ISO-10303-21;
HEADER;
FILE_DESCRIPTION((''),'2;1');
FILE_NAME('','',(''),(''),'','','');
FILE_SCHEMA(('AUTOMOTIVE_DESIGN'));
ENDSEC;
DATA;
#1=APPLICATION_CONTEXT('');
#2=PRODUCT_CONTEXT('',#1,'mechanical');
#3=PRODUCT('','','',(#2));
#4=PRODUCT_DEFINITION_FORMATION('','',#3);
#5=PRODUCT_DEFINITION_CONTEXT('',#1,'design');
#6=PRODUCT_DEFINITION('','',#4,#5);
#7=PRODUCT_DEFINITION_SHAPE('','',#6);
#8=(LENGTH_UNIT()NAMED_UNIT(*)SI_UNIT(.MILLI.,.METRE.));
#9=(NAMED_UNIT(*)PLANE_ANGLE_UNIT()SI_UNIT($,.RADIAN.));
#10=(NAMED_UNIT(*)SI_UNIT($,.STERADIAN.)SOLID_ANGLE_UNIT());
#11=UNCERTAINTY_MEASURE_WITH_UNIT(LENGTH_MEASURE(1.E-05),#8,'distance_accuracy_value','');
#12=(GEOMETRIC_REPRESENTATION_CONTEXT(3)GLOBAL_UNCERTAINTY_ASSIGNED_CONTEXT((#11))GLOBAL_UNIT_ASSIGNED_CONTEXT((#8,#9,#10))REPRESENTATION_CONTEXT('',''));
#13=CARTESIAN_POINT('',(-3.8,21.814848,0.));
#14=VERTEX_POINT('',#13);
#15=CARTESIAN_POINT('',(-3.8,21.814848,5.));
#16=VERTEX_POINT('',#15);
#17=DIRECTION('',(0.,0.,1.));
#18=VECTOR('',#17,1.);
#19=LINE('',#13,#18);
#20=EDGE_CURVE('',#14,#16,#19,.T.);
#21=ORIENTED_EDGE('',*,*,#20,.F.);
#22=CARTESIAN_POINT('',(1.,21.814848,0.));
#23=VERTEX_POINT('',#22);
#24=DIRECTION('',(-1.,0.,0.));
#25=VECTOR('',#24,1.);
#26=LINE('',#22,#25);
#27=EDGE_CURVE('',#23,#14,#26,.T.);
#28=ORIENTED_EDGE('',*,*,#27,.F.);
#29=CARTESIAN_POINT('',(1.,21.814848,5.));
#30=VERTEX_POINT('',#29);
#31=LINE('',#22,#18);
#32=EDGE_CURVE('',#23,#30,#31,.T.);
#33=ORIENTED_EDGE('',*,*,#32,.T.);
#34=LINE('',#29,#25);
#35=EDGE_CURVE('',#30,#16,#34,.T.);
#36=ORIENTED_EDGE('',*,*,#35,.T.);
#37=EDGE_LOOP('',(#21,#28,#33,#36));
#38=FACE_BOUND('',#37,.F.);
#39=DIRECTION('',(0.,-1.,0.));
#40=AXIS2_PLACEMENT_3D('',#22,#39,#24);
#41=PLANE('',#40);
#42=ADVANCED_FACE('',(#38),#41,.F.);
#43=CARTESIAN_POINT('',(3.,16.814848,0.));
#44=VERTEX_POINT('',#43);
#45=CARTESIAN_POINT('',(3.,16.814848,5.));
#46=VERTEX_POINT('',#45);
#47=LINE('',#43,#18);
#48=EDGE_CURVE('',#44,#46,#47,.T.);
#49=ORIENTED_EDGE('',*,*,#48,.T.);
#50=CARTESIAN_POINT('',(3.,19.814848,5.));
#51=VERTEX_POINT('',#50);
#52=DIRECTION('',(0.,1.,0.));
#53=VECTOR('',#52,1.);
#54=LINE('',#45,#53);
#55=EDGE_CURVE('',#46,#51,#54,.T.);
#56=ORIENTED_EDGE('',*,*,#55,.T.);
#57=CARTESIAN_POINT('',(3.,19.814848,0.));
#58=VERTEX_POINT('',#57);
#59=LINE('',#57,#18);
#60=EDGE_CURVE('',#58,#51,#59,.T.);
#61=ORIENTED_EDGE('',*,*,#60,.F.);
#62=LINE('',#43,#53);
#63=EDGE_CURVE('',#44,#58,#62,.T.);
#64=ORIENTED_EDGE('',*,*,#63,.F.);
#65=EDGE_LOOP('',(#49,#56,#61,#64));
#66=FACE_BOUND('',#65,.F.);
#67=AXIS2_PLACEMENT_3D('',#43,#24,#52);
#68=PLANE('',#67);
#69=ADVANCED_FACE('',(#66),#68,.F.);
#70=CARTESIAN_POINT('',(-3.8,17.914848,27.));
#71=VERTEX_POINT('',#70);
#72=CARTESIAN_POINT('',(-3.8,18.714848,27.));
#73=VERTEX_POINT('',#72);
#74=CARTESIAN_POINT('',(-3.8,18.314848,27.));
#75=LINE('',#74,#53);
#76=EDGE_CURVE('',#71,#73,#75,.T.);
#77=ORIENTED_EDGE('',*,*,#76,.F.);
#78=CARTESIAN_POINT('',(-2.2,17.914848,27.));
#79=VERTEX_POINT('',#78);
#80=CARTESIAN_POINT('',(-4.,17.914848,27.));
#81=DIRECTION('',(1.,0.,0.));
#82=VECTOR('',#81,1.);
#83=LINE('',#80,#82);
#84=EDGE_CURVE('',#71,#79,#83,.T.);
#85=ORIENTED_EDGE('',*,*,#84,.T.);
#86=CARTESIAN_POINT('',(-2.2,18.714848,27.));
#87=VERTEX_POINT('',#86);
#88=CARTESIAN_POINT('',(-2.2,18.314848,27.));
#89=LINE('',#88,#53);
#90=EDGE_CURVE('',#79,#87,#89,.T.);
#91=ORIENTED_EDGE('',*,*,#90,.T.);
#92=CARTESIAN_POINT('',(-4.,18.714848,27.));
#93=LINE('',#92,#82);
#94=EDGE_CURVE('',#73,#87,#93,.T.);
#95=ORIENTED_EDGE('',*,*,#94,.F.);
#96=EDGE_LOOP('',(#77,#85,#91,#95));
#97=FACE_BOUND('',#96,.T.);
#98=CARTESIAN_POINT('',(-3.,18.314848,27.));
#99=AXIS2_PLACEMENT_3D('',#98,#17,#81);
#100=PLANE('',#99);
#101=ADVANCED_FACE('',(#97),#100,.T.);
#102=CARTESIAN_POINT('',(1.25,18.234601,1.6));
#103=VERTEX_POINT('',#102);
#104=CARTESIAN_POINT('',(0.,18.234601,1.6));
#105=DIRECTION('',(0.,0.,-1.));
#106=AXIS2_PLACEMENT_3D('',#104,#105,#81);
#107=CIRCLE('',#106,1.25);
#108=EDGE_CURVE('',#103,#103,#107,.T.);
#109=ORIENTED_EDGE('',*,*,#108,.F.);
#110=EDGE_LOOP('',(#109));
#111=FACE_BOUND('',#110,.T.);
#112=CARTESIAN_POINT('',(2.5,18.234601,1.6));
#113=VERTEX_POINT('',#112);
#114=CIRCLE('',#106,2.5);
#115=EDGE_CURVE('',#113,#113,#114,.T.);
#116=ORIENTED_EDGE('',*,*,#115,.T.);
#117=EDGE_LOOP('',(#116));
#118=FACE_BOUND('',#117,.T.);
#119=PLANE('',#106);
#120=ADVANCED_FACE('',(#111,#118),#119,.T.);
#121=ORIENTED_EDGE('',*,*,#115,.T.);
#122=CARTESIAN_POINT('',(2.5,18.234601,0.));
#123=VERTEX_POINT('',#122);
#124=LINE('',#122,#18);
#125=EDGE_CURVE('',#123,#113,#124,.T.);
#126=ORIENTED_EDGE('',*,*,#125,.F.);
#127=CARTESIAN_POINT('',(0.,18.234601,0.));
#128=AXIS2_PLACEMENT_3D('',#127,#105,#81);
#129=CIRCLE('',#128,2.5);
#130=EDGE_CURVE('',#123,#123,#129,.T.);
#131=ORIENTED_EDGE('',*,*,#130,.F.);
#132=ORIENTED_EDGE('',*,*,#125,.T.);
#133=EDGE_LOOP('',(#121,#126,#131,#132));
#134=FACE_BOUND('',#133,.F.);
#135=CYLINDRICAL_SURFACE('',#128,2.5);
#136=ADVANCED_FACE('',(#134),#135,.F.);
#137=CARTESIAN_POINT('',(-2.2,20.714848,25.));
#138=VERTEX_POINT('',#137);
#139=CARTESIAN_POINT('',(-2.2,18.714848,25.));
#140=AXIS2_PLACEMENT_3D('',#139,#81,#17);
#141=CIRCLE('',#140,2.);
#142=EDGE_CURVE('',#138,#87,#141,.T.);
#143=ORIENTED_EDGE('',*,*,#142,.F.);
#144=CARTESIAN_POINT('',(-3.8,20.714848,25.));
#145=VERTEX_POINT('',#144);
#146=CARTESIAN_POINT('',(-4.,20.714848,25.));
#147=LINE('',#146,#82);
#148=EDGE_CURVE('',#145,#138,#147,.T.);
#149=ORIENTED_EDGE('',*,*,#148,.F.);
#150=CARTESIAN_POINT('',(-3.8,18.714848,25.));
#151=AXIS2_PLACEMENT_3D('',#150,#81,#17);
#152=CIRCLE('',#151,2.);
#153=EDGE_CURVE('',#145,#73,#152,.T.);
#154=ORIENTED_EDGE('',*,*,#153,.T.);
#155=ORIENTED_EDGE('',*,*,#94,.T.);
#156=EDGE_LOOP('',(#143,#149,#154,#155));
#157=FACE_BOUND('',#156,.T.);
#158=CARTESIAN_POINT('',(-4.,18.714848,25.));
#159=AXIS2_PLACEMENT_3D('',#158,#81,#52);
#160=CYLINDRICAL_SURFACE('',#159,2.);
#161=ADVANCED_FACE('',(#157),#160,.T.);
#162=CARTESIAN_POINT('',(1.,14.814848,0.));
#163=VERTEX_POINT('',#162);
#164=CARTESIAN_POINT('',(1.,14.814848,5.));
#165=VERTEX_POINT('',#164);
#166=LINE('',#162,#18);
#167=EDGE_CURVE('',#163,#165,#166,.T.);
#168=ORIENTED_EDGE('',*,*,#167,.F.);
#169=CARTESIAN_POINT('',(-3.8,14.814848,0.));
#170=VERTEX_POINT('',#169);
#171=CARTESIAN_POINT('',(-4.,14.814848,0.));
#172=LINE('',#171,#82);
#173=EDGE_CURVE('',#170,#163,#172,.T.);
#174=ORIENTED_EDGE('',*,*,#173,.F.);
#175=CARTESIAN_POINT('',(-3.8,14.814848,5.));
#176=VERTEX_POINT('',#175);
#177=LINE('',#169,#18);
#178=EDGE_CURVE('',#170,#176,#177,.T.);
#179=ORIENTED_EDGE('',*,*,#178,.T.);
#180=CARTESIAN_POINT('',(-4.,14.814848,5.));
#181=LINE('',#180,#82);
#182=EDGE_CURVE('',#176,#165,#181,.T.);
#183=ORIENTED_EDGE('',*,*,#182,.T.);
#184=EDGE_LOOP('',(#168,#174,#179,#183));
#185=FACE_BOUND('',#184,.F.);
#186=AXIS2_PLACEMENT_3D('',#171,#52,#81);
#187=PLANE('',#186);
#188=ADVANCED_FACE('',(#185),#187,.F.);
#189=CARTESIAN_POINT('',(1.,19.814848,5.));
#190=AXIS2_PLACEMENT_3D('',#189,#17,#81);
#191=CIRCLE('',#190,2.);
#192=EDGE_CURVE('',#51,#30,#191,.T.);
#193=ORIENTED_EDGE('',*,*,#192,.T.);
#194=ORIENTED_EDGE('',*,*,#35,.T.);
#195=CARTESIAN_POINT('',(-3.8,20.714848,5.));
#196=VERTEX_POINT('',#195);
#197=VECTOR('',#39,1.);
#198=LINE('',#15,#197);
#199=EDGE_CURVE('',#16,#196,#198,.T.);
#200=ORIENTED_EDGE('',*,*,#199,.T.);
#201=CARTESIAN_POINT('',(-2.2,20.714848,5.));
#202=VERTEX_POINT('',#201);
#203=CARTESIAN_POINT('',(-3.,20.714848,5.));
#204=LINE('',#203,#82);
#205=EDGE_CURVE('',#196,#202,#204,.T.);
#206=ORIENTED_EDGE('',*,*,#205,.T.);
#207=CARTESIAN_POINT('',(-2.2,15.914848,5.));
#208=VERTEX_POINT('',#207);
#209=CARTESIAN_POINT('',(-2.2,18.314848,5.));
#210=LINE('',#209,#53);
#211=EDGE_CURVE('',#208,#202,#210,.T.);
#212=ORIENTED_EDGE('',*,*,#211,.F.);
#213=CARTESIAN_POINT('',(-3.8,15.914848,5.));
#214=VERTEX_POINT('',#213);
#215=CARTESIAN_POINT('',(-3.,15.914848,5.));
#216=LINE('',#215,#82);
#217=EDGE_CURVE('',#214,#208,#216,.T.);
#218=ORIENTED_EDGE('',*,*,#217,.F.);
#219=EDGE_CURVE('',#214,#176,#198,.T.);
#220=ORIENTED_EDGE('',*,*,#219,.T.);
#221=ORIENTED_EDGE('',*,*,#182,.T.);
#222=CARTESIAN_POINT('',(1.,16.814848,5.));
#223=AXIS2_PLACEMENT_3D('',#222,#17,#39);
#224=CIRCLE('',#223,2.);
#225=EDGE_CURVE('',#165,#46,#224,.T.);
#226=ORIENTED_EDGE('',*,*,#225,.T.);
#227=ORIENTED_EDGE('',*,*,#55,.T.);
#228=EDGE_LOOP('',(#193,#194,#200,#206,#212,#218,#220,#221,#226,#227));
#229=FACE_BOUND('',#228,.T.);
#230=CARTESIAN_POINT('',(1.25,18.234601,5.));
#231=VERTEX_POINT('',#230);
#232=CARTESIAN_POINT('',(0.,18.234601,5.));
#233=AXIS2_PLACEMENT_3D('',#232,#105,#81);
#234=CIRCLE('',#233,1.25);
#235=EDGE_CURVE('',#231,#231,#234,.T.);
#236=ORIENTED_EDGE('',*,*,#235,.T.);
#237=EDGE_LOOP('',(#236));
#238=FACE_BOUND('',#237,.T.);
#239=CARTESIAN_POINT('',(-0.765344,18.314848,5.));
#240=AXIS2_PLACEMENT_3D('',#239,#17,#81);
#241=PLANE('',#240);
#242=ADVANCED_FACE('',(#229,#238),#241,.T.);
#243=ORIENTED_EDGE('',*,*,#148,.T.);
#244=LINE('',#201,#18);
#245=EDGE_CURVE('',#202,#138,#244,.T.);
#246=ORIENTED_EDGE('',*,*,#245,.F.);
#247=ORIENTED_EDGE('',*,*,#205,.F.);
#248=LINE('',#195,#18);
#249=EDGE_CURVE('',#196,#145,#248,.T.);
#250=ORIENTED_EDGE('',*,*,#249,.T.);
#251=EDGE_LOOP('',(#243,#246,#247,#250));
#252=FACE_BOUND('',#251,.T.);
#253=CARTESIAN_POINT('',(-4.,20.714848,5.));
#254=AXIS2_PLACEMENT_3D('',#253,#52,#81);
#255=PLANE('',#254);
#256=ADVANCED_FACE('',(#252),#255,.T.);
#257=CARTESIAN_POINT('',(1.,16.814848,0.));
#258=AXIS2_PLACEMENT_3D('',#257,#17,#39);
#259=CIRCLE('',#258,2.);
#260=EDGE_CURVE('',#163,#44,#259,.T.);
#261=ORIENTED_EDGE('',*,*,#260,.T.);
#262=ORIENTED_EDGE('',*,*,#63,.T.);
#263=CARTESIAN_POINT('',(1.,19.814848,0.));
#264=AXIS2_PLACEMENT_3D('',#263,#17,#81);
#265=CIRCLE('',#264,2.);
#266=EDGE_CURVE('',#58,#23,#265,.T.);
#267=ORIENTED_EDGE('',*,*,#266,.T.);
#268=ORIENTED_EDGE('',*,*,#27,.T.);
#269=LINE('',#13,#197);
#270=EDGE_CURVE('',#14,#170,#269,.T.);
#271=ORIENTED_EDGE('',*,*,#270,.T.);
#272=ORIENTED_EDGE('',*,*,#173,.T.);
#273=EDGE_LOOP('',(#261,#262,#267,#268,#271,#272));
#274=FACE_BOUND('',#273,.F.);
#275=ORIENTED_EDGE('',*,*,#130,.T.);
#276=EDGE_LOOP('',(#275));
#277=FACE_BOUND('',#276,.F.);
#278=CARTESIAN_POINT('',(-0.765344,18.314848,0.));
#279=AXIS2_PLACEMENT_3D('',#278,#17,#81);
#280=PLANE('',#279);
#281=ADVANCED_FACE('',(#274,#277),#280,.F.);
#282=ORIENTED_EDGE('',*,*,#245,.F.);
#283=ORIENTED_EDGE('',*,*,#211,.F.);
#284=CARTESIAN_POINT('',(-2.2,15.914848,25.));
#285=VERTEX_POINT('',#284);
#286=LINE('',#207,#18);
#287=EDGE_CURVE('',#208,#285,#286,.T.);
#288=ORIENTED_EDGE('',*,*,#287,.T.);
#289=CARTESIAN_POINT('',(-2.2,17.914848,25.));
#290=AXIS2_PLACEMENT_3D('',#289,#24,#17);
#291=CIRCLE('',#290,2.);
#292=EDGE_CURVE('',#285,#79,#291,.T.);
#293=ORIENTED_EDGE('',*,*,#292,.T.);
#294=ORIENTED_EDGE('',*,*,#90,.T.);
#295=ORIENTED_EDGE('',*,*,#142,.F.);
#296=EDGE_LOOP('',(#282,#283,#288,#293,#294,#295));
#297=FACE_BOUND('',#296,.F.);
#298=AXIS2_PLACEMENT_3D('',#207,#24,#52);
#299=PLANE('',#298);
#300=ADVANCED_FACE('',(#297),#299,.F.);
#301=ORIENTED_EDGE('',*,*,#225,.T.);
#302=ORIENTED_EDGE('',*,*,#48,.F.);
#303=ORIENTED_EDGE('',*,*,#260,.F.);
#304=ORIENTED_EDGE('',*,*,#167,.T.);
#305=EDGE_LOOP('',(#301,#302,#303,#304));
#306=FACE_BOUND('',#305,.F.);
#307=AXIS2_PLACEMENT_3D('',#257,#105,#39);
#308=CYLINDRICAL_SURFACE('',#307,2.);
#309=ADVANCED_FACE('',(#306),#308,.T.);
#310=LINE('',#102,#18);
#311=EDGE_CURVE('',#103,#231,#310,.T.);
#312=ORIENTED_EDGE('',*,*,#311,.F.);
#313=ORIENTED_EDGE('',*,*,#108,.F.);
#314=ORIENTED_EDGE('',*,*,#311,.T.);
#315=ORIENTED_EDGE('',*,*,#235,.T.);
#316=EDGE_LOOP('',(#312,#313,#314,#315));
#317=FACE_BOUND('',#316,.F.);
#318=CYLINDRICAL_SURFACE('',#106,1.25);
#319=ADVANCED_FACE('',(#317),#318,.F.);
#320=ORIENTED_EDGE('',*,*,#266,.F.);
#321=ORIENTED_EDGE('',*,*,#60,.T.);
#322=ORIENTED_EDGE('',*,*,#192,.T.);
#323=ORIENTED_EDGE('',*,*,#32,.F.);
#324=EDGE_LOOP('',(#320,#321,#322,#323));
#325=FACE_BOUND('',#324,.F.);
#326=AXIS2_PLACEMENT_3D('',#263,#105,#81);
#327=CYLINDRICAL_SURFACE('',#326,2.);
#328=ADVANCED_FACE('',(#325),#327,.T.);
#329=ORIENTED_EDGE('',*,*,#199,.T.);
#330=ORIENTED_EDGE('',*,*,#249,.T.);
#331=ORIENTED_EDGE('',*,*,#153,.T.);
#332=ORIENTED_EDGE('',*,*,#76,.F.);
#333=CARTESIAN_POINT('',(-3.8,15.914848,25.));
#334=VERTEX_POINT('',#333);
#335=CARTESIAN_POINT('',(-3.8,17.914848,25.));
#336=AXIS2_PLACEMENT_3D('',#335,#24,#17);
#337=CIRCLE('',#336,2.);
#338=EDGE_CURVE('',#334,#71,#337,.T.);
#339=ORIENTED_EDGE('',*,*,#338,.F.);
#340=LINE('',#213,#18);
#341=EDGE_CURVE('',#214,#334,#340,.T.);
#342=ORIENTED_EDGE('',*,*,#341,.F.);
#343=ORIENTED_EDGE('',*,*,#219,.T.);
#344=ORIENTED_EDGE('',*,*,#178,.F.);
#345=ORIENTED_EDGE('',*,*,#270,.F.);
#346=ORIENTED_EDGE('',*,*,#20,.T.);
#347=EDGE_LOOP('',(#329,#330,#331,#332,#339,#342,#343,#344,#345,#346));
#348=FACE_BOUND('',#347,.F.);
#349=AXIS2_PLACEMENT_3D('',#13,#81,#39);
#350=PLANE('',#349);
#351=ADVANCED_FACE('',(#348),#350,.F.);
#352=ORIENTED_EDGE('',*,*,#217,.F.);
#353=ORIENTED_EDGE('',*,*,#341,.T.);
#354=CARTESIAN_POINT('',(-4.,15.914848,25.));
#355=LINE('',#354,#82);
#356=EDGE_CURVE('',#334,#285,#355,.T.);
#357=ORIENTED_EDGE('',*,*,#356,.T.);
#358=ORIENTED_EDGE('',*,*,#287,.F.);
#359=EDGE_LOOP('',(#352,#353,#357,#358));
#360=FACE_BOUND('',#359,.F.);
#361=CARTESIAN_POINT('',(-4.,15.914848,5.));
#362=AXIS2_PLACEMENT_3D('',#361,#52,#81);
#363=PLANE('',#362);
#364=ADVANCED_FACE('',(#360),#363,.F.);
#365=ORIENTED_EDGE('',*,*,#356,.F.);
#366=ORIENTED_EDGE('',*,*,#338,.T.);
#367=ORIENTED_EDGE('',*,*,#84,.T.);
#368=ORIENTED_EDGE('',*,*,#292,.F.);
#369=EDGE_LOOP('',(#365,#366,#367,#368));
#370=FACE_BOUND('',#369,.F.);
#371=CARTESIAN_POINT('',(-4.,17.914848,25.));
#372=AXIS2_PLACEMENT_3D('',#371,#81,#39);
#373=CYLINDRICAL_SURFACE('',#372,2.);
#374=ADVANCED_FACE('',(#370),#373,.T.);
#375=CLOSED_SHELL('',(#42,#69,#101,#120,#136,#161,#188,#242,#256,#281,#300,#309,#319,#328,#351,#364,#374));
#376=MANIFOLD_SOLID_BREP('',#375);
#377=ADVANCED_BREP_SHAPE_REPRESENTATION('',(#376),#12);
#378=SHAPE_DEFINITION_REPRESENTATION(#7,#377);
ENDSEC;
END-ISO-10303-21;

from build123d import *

# Parameters (mm, degrees)
F1_DEPTH  = 5
F2_R      = 2.5
F3_DEPTH  = 1.6
F4_R      = 1.25
F5_DEPTH  = 3.4
F6_W      = 2
F6_H      = 4.8
F7_DEPTH  = 22
F8_R      = 2
F9_DEPTH  = 0.2
F10_DEPTH = 0.2


# Not quite as in the source:
# - a feature names something its author has since deleted; it is built from what else it names


with BuildPart() as f1:
    # F0 (on Top) → F1 (new body)
    with BuildSketch(Plane.XY):
        with BuildLine():
            Line((1, 21.8148477226), (-4, 21.8148477226))
            Line((-4, 21.8148477226), (-4, 14.8148477226))
            Line((-4, 14.8148477226), (1, 14.8148477226))
            ThreePointArc((1, 14.8148477226), (2.4142135624, 15.4006341603), (3, 16.8148477226))
            Line((3, 16.8148477226), (3, 19.8148477226))
            ThreePointArc((3, 19.8148477226), (2.4142135624, 21.229061285), (1, 21.8148477226))
        make_face()
    extrude(amount=F1_DEPTH)

    # F2 (on face) → F3 (cut)
    with BuildSketch(Plane(origin=(0, 0, 0), x_dir=(1, 0, 0), z_dir=(0, 0, -1))):
        with Locations((0, -18.2346012443)):
            Circle(F2_R)
    extrude(amount=-F3_DEPTH, mode=Mode.SUBTRACT)

    # F4 (on face) → F5 (cut)
    with BuildSketch(Plane(origin=(0, 0, 1.6), x_dir=(1, 0, 0), z_dir=(0, 0, -1))):
        with Locations((0, -18.2346012443)):
            Circle(F4_R)
    extrude(amount=-F5_DEPTH, mode=Mode.SUBTRACT)

    # F6 (on face) → F7 (join)
    with BuildSketch(Plane.XY.offset(5)):
        with Locations((-3, 18.3148477226)):
            Rectangle(F6_W, F6_H)
    extrude(amount=F7_DEPTH)

    # F8
    f8_edges = [f1.edges().sort_by_distance(p)[0] for p in [
        (-3, 20.714848, 27),
        (-3, 15.914848, 27),
    ]]
    fillet(f8_edges, radius=F8_R)

    # F9 (cut): a face of the model
    f9_faces = [f1.faces().sort_by_distance(p)[0] for p in [
        (-2, 18.3148477226, 15.8255925745),
    ]]
    extrude(f9_faces, amount=-F9_DEPTH, mode=Mode.SUBTRACT)

    # F10 (cut): a face of the model
    f10_faces = [f1.faces().sort_by_distance(p)[0] for p in [
        (-4, 18.3148477226, 12.4674053391),
    ]]
    extrude(f10_faces, amount=-F10_DEPTH, mode=Mode.SUBTRACT)


solid = f1.part
